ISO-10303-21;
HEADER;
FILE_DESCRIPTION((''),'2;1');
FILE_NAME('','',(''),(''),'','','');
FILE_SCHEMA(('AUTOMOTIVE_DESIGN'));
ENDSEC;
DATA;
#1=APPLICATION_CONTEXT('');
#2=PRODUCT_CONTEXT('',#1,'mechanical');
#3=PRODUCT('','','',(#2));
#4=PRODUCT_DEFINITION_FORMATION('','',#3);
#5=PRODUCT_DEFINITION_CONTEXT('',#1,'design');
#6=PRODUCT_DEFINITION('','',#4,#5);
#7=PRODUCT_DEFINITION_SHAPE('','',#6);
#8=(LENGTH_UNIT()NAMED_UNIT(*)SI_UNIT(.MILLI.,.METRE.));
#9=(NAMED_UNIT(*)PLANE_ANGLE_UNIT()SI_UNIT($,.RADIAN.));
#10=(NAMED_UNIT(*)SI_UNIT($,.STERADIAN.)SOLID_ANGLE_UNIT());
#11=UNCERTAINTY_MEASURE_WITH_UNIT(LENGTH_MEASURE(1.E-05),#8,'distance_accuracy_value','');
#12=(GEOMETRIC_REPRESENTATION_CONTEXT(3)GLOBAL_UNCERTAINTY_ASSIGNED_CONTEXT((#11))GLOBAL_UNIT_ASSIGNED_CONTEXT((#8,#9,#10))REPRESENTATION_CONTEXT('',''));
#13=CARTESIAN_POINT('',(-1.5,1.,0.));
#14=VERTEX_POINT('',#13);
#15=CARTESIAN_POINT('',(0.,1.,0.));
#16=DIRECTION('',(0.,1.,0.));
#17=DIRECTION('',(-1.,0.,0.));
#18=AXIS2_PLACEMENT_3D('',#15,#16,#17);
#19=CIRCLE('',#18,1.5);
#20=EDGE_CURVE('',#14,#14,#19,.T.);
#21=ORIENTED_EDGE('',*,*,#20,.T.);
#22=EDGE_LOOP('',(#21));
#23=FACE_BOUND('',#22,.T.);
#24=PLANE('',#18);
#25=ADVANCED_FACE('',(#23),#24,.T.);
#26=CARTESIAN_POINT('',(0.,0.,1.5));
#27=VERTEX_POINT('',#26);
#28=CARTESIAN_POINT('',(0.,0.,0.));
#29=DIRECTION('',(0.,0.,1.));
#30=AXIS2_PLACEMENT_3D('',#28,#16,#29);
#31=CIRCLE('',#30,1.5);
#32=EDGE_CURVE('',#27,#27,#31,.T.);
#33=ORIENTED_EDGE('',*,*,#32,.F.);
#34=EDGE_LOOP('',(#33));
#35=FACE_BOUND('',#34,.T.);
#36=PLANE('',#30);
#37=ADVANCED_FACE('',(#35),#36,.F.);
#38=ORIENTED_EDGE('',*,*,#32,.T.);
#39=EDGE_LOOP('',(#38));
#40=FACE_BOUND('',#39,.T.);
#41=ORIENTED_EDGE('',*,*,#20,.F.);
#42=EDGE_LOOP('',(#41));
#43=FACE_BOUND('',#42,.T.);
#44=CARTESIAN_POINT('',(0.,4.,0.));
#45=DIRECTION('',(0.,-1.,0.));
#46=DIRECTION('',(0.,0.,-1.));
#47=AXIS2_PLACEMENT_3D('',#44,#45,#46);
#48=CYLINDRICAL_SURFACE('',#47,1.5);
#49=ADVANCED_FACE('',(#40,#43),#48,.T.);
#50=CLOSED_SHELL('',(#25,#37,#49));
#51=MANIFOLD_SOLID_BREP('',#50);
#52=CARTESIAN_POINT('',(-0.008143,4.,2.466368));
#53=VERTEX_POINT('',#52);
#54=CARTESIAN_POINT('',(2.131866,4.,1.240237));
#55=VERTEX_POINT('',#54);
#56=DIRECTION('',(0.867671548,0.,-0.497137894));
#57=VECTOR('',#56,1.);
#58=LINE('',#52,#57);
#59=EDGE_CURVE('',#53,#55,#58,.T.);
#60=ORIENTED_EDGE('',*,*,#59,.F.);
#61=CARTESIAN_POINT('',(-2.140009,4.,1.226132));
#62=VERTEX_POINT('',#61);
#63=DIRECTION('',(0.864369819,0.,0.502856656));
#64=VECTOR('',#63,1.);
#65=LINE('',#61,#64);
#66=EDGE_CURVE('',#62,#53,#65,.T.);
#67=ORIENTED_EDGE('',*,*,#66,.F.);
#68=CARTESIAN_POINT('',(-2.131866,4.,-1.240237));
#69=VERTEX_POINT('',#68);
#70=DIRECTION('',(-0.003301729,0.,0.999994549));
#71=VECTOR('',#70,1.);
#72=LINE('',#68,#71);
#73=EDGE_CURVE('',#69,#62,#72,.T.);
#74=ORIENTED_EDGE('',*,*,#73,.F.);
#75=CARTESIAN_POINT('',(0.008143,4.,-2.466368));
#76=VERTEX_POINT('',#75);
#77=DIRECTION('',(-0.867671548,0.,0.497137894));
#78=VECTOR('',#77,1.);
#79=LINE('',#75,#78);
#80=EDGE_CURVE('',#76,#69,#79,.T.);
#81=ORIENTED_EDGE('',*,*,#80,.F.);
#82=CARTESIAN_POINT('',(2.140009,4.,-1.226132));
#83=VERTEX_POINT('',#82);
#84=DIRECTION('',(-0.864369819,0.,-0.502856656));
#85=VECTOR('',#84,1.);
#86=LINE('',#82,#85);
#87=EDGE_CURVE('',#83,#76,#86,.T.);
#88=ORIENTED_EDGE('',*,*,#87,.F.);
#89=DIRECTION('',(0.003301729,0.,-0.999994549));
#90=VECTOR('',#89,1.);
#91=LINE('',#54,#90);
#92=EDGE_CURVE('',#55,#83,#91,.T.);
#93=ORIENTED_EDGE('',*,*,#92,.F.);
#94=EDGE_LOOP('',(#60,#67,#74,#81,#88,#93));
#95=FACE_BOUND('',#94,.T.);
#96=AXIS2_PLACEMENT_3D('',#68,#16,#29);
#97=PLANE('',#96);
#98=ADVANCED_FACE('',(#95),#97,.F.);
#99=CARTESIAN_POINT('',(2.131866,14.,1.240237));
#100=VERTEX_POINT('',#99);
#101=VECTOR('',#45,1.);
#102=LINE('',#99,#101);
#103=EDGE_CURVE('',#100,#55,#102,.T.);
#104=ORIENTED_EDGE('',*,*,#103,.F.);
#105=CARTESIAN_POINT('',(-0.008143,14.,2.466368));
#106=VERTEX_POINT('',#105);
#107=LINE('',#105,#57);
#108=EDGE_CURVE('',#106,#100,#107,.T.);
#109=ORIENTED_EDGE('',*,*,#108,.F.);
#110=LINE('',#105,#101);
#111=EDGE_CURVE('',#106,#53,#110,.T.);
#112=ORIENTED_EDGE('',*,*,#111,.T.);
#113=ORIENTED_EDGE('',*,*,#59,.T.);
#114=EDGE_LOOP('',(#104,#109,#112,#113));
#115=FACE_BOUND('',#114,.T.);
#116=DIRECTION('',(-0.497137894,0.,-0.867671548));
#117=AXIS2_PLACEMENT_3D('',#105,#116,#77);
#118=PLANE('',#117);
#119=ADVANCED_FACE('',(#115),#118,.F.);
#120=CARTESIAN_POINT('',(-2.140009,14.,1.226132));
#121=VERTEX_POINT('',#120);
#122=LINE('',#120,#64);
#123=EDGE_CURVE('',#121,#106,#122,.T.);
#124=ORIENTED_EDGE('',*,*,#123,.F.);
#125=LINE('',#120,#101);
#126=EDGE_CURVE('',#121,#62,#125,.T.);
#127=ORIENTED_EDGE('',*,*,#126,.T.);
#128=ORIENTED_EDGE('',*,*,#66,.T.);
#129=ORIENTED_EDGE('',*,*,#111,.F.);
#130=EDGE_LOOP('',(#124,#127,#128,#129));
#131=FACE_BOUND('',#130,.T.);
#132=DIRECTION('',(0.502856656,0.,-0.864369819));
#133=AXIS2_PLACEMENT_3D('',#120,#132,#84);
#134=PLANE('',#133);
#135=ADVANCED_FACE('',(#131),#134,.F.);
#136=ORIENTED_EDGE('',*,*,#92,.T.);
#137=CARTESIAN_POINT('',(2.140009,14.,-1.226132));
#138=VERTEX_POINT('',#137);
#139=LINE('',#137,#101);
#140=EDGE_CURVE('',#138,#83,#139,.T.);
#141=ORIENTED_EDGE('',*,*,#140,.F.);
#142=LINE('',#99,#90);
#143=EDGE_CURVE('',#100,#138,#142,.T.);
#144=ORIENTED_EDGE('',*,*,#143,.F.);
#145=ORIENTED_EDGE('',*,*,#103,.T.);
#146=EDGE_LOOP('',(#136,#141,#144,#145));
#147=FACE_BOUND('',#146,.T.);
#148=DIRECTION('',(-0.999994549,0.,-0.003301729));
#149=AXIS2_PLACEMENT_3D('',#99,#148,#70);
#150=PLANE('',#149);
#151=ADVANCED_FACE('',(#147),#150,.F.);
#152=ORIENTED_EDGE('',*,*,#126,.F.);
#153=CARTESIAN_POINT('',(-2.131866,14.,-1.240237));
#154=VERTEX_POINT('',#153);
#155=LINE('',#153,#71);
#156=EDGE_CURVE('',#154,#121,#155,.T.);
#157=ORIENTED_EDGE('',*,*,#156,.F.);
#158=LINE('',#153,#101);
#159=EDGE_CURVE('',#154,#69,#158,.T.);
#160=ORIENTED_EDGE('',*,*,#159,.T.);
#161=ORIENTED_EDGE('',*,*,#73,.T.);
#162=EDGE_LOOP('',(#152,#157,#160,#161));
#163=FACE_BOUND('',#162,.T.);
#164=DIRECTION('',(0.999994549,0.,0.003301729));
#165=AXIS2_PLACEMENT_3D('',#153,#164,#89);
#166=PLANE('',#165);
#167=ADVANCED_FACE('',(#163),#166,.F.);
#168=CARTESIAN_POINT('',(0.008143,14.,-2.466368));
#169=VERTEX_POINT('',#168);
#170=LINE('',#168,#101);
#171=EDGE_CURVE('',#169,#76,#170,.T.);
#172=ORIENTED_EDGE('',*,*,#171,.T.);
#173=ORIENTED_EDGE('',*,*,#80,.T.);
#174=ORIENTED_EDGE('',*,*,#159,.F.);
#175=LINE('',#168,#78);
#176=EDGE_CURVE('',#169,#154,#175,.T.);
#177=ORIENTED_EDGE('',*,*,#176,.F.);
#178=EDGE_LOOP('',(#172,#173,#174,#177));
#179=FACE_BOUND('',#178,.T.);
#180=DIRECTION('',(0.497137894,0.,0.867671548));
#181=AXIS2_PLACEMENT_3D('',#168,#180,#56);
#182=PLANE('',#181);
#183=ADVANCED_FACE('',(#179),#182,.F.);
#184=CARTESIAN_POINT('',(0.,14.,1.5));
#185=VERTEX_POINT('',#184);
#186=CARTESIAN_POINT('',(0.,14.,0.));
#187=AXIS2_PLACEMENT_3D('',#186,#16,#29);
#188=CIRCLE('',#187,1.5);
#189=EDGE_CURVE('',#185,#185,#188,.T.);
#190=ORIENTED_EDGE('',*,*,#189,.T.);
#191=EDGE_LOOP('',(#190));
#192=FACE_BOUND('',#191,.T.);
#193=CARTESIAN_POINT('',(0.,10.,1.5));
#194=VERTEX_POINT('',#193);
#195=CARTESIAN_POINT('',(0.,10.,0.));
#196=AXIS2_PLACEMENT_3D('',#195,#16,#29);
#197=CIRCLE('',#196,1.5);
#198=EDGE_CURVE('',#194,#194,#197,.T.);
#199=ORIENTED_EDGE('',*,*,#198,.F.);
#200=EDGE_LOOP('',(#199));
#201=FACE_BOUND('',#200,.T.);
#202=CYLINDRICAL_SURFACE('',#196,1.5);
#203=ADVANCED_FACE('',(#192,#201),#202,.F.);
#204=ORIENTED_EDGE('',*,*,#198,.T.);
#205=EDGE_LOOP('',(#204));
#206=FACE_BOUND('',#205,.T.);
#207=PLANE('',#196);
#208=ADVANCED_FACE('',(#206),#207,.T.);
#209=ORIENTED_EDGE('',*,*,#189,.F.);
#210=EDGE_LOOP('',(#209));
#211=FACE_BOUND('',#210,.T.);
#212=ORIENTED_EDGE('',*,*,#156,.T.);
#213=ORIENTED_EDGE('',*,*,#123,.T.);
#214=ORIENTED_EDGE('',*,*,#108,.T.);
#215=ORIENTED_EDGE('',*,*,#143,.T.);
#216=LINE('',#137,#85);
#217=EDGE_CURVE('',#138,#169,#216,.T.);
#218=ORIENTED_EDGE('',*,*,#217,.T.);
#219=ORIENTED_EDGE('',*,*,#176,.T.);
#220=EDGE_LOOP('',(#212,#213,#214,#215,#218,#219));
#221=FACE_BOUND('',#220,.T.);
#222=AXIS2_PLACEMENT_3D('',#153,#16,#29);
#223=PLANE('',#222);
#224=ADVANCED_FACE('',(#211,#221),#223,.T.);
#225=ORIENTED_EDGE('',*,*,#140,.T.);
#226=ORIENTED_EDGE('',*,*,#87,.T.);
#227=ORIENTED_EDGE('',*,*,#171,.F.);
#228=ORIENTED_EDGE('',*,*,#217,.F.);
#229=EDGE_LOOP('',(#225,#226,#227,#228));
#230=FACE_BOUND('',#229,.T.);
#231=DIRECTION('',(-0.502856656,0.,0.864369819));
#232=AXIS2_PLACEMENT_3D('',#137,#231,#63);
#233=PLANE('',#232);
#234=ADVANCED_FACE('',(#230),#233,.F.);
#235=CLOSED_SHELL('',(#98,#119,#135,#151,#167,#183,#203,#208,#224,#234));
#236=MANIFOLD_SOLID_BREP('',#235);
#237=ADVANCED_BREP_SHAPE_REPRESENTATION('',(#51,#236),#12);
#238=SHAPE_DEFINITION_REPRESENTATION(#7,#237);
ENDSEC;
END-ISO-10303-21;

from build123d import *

# Parameters (mm, degrees)
ESQUISSE1_R             = 1.5
BOSS_EXTRU_1_DEPTH      = 4
BOSS_EXTRU_2_DEPTH      = 10
ENL_V_START             = -4
ESQUISSE3_R             = 1.5
ENL_V_MAT_EXTRU_1_DEPTH = 4
PER_AGE1_START          = 1
PER_AGE1_OUTLINE_R      = 1.5
PER_AGE1_DEPTH          = 3


# Read off the part's stored shape, not the designer's step: Perçage1
with BuildPart() as part:
    # Esquisse1 → Boss.-Extru.1 (new body)
    with BuildSketch(Plane(origin=(0, 0, 0), x_dir=(1, 0, 0), z_dir=(0, 1, 0))):
        with Locations(Location((0, 0, 0), (0, 0, 270))):
            Circle(ESQUISSE1_R)
    extrude(amount=BOSS_EXTRU_1_DEPTH)

    # Esquisse2 → Boss.-Extru.2 (add)
    with BuildSketch(Plane(origin=(0, 4, 0), x_dir=(-1, 0, 0), z_dir=(0, 1, 0))):
        Polygon((2.131865991, -1.240236504), (2.140009315, 1.226131853), (0.008143324, 2.466368358), (-2.131865991, 1.240236504), (-2.140009315, -1.226131853), (-0.008143324, -2.466368358), align=None)
    extrude(amount=BOSS_EXTRU_2_DEPTH)

    # Esquisse3 → Enlèv. mat.-Extru.1 (cut)
    with BuildSketch(Plane(origin=(0, 14, 0), x_dir=(-1, 0, 0), z_dir=(0, 1, 0)).offset(ENL_V_START)):
        with Locations(Location((0, 0, 0), (0, 0, 90))):
            Circle(ESQUISSE3_R)
    extrude(amount=ENL_V_MAT_EXTRU_1_DEPTH, mode=Mode.SUBTRACT)

    # Perçage1 outline → Perçage1 (cut)
    with BuildSketch(Plane(origin=(0, 0, 0), x_dir=(1, 0, 0), z_dir=(0, 1, 0)).offset(PER_AGE1_START)):
        Circle(PER_AGE1_OUTLINE_R)
    extrude(amount=PER_AGE1_DEPTH, mode=Mode.SUBTRACT)


solid = part.part
